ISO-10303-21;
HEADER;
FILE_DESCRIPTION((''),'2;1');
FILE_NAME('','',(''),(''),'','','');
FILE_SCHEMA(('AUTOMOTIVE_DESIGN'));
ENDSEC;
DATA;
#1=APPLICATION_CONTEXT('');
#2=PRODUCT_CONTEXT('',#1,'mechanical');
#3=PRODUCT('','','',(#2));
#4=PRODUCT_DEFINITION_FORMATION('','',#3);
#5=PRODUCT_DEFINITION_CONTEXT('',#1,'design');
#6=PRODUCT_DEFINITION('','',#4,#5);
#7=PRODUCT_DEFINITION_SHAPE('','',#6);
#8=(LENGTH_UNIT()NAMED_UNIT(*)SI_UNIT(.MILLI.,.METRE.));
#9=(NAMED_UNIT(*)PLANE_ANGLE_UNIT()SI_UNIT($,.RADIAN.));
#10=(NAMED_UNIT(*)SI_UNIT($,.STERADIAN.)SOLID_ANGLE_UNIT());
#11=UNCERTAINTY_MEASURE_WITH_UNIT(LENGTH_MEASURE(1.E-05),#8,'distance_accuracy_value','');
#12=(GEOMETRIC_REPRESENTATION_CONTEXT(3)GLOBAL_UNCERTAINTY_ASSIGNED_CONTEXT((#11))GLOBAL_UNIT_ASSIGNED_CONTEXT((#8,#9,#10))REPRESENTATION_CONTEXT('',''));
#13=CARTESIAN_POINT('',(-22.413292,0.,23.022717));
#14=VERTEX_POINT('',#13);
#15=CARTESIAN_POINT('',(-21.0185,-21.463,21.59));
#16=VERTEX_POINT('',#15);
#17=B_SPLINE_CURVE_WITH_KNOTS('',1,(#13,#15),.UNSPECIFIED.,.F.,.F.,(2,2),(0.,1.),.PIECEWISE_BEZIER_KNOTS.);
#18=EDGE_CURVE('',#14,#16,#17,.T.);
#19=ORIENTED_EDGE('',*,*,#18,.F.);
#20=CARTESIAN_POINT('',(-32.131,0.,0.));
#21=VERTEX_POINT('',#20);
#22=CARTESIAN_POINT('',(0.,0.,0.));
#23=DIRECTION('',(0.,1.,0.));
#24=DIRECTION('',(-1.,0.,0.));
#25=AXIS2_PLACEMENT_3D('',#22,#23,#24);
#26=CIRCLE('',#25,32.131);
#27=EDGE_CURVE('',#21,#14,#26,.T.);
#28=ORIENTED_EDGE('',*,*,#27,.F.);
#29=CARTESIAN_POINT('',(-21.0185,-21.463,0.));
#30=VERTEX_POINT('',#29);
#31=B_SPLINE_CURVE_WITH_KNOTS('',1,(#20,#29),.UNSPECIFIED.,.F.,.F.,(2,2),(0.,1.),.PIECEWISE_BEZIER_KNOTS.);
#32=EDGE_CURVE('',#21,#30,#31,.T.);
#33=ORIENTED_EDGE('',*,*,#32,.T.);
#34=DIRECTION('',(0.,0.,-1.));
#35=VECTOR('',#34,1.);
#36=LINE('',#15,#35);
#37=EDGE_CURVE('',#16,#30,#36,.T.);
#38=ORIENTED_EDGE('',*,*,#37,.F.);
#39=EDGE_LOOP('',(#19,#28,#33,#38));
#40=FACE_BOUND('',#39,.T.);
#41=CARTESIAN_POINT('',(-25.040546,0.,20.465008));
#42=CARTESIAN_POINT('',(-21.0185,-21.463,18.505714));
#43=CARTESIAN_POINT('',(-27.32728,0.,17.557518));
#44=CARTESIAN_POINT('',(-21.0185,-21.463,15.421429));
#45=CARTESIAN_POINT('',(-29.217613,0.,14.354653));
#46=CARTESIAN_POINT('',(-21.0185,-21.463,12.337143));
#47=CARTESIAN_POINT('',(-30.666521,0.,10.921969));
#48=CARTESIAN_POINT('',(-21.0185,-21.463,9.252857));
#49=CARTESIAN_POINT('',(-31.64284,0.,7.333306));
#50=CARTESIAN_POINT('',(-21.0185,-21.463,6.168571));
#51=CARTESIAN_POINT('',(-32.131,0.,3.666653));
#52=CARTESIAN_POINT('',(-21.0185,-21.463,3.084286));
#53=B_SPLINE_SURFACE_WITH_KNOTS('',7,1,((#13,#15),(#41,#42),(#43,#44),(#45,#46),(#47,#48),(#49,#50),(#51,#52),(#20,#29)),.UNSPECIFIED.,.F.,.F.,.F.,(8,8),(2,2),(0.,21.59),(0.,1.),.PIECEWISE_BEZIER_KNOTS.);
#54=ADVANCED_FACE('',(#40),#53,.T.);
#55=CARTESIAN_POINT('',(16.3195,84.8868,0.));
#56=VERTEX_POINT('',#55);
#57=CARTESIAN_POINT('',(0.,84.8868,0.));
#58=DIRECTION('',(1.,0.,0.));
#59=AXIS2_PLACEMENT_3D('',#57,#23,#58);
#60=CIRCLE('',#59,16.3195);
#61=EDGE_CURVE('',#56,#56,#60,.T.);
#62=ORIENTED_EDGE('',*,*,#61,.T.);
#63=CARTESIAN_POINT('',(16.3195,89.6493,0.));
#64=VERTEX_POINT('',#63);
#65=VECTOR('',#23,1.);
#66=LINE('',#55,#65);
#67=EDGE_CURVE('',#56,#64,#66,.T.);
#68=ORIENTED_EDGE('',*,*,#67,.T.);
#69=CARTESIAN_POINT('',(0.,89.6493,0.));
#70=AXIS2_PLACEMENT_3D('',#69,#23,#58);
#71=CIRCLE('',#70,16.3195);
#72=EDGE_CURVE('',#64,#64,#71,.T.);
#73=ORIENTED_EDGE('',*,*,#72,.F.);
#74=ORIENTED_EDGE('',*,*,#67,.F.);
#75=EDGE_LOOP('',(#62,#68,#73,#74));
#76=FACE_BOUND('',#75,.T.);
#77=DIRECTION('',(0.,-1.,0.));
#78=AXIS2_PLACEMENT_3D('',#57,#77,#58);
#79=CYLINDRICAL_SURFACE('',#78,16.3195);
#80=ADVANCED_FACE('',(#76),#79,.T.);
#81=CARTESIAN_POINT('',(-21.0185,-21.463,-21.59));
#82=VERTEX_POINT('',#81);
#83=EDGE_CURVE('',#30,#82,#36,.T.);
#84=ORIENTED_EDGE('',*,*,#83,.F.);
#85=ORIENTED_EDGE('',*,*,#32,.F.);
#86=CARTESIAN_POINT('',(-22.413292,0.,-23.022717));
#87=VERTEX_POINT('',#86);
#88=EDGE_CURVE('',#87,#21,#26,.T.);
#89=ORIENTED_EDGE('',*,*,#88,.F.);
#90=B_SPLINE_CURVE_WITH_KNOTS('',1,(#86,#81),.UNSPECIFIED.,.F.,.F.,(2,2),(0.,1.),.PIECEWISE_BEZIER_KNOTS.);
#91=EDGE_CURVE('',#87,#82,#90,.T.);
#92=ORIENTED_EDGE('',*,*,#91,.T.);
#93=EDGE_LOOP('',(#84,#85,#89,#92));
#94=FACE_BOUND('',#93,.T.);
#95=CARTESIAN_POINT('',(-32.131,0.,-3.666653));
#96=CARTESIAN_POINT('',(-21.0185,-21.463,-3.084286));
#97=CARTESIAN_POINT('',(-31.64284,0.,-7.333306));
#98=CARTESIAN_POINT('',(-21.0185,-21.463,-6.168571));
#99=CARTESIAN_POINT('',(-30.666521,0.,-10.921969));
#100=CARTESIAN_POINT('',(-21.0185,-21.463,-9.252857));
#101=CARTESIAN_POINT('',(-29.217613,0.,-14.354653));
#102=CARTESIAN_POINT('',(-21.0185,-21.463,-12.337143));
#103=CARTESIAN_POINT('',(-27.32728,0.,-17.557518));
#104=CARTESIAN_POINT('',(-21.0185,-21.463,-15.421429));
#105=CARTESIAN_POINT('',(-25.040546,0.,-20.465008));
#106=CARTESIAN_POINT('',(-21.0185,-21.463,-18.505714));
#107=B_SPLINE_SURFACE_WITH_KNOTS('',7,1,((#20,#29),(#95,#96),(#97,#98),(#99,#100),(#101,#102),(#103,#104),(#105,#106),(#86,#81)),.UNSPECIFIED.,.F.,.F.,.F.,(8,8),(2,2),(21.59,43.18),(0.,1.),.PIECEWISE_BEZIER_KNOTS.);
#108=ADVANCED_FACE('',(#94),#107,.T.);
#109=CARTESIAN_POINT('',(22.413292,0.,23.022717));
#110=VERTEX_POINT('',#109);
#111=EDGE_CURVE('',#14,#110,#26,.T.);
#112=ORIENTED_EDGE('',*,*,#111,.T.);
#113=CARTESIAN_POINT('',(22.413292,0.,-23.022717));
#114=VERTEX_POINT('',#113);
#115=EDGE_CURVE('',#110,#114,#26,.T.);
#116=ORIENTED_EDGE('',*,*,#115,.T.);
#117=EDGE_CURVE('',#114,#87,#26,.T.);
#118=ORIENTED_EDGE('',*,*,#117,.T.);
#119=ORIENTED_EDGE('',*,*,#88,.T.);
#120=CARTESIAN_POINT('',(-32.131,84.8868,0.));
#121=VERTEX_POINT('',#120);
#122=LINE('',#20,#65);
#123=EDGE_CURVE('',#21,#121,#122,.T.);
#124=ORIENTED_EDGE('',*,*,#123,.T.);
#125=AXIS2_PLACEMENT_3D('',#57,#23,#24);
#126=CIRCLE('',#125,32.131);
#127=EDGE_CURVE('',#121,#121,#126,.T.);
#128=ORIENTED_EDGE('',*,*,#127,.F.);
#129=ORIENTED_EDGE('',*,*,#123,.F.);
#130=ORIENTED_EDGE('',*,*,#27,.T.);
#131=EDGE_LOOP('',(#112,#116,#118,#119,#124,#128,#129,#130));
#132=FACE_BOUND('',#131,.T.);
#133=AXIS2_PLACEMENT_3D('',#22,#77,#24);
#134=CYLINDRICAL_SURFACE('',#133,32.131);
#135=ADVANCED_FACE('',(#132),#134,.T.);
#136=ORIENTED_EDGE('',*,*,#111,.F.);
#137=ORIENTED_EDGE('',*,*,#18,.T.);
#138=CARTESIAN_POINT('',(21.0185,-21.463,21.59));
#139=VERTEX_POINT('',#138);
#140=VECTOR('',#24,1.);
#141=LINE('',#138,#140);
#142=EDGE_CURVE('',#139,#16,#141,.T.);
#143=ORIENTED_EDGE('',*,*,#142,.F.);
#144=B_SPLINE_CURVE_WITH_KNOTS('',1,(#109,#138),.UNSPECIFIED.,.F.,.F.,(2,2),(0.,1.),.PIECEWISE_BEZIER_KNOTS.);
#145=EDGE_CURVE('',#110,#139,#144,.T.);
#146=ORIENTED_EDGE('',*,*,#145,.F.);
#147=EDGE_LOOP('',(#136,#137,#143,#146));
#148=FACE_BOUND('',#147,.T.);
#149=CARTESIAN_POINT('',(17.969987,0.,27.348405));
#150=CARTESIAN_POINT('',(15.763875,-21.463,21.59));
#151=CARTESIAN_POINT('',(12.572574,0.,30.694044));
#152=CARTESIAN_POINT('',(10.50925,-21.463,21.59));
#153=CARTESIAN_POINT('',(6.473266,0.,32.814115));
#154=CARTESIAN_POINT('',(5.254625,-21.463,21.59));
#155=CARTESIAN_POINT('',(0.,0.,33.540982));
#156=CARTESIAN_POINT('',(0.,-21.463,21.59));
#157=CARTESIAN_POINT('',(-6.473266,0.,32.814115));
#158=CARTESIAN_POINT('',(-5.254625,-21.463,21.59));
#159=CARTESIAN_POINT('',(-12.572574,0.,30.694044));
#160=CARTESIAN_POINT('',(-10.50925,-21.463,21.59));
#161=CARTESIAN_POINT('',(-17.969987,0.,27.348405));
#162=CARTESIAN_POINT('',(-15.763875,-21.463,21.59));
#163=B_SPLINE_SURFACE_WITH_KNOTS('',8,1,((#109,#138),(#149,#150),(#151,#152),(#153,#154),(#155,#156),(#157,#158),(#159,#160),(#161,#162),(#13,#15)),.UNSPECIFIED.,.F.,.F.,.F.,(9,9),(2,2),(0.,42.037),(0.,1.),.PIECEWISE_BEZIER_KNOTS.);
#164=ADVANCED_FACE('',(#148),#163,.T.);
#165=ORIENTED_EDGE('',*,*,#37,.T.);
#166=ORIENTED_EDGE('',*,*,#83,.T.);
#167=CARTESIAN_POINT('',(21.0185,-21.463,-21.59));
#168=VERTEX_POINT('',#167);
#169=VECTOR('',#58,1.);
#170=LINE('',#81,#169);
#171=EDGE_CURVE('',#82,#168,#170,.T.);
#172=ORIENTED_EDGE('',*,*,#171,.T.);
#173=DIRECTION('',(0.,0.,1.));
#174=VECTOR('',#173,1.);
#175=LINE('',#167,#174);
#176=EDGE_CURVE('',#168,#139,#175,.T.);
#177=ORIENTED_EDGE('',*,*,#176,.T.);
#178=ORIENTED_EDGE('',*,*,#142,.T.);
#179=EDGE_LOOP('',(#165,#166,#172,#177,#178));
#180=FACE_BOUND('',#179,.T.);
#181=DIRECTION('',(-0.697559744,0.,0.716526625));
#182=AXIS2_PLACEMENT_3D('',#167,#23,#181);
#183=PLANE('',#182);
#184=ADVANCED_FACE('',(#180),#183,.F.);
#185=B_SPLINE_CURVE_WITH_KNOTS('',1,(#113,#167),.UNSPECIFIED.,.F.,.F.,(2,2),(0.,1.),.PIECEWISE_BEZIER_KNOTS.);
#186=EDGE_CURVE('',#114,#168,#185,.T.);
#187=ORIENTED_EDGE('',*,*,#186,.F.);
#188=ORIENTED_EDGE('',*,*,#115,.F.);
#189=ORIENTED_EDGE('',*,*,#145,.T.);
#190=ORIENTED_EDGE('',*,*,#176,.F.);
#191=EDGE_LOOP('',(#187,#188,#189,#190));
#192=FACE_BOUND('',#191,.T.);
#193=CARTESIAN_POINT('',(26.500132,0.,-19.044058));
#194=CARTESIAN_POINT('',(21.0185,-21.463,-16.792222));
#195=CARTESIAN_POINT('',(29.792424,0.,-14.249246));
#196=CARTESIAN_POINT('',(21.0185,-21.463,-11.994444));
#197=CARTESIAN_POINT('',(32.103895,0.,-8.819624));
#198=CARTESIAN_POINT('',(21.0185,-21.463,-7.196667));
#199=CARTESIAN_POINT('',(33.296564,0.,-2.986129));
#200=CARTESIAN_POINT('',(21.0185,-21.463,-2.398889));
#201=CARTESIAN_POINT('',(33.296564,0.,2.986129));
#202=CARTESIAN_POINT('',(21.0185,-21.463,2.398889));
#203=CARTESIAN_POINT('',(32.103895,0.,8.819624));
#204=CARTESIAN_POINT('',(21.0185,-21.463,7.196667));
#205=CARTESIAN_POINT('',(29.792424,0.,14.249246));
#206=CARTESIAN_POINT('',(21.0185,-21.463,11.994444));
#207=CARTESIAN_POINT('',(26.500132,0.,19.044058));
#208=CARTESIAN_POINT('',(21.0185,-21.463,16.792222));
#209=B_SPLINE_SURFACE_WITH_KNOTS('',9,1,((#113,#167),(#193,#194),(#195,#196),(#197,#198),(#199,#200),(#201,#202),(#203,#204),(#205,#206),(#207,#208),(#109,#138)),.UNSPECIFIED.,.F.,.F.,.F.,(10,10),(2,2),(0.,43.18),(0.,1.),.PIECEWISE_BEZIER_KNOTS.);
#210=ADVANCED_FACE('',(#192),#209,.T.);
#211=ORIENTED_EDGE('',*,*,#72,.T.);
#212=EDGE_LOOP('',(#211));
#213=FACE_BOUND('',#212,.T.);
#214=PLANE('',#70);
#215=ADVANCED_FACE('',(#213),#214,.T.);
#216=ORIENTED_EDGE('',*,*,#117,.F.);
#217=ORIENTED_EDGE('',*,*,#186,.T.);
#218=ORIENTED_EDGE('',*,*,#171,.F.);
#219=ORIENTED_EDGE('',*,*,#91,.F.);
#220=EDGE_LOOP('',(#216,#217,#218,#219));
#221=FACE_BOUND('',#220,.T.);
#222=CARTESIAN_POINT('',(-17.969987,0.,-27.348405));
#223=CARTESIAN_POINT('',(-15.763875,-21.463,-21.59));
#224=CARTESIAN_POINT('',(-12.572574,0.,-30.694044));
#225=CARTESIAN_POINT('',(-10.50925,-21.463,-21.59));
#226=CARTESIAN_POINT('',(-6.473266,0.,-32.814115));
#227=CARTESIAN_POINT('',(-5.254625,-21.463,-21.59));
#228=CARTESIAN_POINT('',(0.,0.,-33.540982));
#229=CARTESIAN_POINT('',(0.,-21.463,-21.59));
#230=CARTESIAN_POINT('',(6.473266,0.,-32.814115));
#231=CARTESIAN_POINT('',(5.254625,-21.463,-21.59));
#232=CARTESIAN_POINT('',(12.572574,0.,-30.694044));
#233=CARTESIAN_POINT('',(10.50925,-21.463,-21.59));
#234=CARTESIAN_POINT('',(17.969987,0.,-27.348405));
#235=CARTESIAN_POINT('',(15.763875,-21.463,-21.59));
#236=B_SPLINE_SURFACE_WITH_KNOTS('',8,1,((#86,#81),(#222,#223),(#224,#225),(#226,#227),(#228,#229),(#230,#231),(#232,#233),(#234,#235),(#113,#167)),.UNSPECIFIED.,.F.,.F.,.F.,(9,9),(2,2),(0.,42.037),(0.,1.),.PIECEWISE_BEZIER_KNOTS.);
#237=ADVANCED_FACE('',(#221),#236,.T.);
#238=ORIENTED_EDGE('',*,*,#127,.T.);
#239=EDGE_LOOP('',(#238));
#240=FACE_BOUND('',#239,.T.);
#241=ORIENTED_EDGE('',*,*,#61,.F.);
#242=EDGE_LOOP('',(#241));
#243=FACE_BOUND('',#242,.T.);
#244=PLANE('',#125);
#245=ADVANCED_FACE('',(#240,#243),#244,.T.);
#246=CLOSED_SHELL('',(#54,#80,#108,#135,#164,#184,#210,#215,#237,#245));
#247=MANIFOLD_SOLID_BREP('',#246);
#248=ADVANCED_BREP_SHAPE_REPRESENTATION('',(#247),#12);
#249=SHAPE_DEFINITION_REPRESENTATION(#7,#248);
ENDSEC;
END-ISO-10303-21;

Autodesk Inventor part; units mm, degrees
ref_plane "YZ Plane" through (0, 0, 0) normal (1, 0, 0) x (0, 1, 0)
ref_plane "XZ Plane" through (0, 0, 0) normal (0, 1, 0) x (-1, 0, 0)
ref_plane "XY Plane" through (0, 0, 0) normal (0, 0, 1) x (1, 0, 0)
sketch "Sketch1" plane through (0, 0, 0) normal (0, 1, 0) x (-1, 0, 0)
  circle A0 centre (0, 0) radius 16.3195
  circle A1 centre (0, 0) radius 32.131
  dimension "d0" = 32.639
  dimension "d1" = 64.262
extrude "Extrusion1" add sketch "Sketch1" along normal blind 84.8868 contours A0 | A1
sketch "Sketch2" plane through (0, 84.8868, 0) normal (0, 1, 0) x (1, 0, 0)
  circle A0 centre (0, 0) radius 16.3195
  dimension "d4" = 32.639
extrude "Extrusion2" add sketch "Sketch2" along normal blind 4.7625
sketch "Sketch3" plane through (0, 0, 0) normal (0, -1, 0) x (1, 0, 0)
  circle A0 centre (0, 0) radius 32.131
ref_plane "Work Plane1" through (0, -21.463, 0) normal (0, -1, 0) x (1, 0, 0)
sketch "Sketch4" plane through (0, -21.463, 0) normal (0, -1, 0) x (1, 0, 0)
  line L0 (21.0185, 21.59) -> (-21.0185, 21.59)
  line L1 (-21.0185, 21.59) -> (-21.0185, -21.59)
  line L2 (-21.0185, -21.59) -> (21.0185, -21.59)
  line L3 (21.0185, -21.59) -> (21.0185, 21.59)
  point P0 (0, 0)
  dimension "d8" = 43.18
  dimension "d9" = 42.037
  dimension "d10" = 21.0185
  dimension "d11" = 21.59
loft "Loft1" add profiles "Sketch4" section 1 edges at (32.131, 0, 0)
equation "\"d10\" = 0.5 * d9"
equation "\"d11\" = 0.5 * d8"
properties part number "Motor"
